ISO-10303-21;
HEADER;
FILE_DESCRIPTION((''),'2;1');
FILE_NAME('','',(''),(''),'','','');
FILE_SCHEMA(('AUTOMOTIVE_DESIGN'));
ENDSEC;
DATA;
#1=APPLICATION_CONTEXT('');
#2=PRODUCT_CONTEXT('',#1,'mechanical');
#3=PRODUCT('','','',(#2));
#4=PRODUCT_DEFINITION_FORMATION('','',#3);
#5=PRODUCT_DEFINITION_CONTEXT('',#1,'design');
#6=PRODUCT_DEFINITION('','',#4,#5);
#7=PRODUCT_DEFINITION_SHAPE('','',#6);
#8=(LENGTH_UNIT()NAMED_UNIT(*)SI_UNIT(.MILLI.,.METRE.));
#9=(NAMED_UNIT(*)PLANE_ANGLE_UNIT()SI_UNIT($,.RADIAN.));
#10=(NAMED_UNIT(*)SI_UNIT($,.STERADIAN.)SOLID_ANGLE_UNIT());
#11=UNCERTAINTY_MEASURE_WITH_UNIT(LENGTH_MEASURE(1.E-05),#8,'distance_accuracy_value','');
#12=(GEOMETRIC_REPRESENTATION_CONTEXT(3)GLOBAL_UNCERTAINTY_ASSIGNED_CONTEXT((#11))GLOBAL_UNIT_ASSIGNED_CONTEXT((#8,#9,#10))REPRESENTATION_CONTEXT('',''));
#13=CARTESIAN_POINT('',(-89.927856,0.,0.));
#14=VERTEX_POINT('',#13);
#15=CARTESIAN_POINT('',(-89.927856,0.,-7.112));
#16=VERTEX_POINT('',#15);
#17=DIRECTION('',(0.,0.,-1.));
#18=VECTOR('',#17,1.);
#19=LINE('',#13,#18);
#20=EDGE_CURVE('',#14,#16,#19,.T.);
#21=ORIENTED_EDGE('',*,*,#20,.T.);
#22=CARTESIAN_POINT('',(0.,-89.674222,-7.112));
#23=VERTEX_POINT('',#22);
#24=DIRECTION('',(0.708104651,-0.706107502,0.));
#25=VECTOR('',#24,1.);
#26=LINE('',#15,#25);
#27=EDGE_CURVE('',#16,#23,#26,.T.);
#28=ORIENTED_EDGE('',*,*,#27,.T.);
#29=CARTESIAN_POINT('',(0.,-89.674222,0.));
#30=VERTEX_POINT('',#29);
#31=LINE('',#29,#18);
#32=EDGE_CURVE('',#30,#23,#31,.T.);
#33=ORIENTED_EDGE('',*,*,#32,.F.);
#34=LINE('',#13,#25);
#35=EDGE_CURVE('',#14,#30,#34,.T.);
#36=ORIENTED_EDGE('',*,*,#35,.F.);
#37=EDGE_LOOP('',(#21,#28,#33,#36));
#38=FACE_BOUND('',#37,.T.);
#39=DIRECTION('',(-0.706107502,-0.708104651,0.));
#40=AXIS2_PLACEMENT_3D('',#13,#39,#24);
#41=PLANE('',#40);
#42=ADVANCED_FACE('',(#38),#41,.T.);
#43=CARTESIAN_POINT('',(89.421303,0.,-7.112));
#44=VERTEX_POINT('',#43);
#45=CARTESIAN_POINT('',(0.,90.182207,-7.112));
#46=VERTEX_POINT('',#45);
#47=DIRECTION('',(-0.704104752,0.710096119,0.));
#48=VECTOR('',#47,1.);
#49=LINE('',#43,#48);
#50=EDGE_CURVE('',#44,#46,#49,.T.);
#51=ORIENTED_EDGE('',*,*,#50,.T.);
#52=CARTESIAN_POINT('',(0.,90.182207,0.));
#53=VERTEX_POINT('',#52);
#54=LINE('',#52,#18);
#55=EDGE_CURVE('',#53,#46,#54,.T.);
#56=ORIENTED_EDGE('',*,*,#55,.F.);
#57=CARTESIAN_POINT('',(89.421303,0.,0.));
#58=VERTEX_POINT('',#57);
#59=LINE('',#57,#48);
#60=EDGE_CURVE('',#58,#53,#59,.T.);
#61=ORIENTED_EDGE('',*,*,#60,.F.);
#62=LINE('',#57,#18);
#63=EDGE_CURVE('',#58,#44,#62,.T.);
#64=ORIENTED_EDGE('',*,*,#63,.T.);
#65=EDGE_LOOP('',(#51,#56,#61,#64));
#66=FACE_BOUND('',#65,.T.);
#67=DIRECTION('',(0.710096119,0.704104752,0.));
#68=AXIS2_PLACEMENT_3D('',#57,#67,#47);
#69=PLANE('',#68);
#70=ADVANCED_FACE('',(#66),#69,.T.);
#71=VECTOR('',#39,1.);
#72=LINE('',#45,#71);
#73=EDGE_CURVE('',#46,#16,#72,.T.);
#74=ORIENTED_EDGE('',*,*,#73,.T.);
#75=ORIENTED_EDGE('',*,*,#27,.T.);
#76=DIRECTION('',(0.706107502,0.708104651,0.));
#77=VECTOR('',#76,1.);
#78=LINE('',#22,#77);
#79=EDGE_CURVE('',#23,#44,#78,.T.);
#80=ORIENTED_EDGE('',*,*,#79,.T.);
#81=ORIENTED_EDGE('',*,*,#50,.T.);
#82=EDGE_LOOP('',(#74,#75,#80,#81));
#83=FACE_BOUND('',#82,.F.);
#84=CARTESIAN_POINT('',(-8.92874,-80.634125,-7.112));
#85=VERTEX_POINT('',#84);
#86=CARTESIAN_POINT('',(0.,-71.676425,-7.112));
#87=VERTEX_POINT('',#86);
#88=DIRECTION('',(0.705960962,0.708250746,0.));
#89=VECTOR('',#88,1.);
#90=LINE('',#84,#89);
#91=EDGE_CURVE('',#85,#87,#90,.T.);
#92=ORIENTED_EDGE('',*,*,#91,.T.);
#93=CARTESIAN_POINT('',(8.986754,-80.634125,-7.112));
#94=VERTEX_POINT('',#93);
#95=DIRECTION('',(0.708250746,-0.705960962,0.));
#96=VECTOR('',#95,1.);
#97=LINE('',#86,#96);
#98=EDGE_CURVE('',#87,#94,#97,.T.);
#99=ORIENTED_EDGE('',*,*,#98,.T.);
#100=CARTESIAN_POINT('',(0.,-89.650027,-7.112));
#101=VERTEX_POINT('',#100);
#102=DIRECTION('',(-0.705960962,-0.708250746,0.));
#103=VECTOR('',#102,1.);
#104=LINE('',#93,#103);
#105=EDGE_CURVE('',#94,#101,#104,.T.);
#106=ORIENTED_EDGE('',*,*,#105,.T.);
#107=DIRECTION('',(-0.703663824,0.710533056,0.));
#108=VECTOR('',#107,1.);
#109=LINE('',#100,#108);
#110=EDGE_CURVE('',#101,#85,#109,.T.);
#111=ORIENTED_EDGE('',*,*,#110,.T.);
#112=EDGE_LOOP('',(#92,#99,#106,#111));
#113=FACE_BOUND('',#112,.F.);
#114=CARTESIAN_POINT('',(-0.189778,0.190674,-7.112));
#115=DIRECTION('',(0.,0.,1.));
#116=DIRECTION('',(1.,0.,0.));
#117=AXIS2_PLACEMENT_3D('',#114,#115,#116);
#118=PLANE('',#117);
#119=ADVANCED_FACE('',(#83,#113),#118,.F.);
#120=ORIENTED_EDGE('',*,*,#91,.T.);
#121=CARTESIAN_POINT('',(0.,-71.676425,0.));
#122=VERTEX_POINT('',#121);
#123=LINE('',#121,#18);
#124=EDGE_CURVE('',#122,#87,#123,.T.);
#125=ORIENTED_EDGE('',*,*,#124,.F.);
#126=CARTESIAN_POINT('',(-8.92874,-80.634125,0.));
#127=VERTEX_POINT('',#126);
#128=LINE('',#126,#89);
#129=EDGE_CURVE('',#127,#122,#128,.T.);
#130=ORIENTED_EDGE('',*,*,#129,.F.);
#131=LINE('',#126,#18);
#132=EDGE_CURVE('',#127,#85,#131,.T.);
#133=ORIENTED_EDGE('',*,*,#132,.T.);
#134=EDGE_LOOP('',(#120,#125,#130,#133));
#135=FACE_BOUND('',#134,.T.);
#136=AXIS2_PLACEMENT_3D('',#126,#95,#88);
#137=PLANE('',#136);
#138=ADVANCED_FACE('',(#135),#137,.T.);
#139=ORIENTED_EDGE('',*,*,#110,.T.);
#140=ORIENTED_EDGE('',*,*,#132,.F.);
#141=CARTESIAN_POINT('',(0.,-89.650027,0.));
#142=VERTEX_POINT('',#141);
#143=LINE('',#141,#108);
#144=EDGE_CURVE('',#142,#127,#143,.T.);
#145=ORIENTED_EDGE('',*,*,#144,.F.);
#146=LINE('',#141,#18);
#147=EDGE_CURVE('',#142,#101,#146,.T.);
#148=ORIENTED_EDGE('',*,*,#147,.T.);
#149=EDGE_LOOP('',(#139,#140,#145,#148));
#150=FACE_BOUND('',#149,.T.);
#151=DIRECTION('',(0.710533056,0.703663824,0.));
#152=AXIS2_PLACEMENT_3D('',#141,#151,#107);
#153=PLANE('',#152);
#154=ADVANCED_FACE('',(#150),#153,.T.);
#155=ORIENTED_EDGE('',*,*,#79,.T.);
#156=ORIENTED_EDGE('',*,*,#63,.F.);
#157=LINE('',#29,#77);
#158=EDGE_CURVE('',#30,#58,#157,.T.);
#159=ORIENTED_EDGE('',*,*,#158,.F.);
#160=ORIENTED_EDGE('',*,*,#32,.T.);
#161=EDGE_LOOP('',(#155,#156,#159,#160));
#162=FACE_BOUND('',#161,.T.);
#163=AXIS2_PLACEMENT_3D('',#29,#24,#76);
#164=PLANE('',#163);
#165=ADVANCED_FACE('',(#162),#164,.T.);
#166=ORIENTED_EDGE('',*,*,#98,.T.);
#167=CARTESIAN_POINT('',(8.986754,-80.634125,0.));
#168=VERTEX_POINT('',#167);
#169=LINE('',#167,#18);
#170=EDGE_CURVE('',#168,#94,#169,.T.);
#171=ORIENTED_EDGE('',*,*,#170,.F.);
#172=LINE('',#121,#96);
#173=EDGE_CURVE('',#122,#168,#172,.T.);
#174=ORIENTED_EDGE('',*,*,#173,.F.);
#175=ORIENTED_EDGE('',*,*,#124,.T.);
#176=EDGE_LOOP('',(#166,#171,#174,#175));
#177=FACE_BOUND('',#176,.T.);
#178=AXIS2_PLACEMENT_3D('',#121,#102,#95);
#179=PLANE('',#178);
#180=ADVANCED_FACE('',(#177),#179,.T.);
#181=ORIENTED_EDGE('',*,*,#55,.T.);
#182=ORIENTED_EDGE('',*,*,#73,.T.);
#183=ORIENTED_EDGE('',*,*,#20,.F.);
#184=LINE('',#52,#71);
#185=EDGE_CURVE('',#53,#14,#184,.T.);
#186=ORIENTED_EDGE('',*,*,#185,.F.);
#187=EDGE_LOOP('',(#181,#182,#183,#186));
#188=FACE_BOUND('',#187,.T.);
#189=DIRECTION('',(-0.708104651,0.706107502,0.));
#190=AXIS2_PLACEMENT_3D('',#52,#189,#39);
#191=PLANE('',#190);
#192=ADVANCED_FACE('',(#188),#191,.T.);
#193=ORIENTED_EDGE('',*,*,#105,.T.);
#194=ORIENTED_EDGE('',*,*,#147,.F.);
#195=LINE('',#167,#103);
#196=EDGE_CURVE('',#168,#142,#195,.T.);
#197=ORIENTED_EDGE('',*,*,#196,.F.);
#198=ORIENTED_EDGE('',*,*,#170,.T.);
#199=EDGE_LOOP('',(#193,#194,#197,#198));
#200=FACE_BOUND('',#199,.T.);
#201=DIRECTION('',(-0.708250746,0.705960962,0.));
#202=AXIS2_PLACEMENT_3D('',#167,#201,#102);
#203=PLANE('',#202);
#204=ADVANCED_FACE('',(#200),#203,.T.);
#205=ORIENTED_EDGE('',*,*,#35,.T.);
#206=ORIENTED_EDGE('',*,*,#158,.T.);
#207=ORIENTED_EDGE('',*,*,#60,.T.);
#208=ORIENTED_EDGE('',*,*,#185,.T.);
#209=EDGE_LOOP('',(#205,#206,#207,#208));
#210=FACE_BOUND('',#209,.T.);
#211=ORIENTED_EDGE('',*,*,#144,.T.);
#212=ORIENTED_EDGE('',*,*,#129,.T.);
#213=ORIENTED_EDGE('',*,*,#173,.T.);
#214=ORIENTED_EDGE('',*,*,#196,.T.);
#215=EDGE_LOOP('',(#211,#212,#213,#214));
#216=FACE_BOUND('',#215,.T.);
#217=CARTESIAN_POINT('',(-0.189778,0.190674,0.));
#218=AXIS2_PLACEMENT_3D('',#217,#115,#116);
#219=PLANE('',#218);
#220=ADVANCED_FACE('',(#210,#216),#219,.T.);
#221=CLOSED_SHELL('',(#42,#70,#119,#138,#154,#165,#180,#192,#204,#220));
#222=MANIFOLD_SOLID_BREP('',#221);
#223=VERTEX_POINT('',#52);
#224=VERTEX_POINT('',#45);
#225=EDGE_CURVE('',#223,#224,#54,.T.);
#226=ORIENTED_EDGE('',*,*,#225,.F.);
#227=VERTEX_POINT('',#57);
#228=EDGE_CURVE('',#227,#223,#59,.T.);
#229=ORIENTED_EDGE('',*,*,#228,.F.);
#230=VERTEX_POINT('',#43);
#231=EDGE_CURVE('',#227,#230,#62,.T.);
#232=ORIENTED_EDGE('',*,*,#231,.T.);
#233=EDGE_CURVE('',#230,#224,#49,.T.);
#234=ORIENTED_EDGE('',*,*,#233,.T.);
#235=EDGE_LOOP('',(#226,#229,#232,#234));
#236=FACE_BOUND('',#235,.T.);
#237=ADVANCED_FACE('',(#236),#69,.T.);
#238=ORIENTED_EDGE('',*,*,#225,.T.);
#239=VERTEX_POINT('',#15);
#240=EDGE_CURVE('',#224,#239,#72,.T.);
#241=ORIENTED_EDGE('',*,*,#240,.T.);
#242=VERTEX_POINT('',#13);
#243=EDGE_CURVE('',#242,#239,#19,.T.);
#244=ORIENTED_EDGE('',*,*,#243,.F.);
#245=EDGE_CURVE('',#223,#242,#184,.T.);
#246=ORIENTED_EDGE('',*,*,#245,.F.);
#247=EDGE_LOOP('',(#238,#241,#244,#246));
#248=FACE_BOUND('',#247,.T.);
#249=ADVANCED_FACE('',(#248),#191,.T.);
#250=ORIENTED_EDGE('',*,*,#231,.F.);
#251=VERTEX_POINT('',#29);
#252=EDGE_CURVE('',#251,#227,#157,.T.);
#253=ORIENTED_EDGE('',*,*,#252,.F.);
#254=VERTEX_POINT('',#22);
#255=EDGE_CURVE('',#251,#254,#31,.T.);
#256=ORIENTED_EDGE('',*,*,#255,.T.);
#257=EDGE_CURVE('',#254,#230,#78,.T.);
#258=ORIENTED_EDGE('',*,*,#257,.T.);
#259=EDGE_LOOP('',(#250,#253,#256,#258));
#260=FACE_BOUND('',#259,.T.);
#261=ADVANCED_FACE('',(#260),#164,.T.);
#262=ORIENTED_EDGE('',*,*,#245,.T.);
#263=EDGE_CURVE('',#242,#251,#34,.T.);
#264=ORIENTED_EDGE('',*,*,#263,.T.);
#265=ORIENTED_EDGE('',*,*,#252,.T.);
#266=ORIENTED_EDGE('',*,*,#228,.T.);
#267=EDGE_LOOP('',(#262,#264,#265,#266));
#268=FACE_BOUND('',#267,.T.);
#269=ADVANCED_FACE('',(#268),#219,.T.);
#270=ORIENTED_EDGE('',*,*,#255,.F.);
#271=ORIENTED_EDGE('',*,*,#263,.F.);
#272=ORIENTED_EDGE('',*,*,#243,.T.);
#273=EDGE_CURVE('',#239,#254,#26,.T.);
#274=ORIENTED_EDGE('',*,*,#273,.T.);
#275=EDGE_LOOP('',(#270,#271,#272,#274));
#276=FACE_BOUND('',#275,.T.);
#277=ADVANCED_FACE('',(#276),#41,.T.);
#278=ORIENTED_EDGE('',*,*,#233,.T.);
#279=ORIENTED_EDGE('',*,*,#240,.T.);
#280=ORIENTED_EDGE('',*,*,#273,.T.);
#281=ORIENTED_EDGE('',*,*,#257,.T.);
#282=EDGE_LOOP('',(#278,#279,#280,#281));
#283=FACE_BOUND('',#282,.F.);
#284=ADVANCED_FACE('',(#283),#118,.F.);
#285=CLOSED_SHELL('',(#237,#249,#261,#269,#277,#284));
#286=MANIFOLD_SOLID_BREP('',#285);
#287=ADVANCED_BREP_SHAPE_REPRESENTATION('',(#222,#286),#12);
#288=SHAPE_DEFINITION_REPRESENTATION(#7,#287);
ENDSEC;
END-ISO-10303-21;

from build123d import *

# Parameters (mm, degrees)
F4_DEPTH = 7.112


# Not quite as in the source:
# - the program builds the solid bodies; features that only make, move or delete a surface that nothing else refers to are left out


with BuildPart() as f4:
    # F2 (on face) → F4 (new body)
    with BuildSketch(Plane.XY):
        Polygon((0, -89.6742220027), (89.421303474, 0), (0, 90.1822071421), (-89.9278558843, 0), align=None)
        Polygon((8.9867543429, -80.634124577), (0, -89.6500274539), (-8.9287396832, -80.634124577), (0, -71.6764245305), align=None, mode=Mode.SUBTRACT)
    extrude(amount=-F4_DEPTH)


with BuildPart() as f4b:
    # F0 (on Top) → F4, piece 2 (new body)
    with BuildSketch(Plane.XY):
        Polygon((89.421303474, 0), (0, 90.1822071421), (-89.9278558843, 0), (0, -89.6742220027), align=None)
    extrude(amount=-F4_DEPTH)


solid = Compound([f4.part, f4b.part])
